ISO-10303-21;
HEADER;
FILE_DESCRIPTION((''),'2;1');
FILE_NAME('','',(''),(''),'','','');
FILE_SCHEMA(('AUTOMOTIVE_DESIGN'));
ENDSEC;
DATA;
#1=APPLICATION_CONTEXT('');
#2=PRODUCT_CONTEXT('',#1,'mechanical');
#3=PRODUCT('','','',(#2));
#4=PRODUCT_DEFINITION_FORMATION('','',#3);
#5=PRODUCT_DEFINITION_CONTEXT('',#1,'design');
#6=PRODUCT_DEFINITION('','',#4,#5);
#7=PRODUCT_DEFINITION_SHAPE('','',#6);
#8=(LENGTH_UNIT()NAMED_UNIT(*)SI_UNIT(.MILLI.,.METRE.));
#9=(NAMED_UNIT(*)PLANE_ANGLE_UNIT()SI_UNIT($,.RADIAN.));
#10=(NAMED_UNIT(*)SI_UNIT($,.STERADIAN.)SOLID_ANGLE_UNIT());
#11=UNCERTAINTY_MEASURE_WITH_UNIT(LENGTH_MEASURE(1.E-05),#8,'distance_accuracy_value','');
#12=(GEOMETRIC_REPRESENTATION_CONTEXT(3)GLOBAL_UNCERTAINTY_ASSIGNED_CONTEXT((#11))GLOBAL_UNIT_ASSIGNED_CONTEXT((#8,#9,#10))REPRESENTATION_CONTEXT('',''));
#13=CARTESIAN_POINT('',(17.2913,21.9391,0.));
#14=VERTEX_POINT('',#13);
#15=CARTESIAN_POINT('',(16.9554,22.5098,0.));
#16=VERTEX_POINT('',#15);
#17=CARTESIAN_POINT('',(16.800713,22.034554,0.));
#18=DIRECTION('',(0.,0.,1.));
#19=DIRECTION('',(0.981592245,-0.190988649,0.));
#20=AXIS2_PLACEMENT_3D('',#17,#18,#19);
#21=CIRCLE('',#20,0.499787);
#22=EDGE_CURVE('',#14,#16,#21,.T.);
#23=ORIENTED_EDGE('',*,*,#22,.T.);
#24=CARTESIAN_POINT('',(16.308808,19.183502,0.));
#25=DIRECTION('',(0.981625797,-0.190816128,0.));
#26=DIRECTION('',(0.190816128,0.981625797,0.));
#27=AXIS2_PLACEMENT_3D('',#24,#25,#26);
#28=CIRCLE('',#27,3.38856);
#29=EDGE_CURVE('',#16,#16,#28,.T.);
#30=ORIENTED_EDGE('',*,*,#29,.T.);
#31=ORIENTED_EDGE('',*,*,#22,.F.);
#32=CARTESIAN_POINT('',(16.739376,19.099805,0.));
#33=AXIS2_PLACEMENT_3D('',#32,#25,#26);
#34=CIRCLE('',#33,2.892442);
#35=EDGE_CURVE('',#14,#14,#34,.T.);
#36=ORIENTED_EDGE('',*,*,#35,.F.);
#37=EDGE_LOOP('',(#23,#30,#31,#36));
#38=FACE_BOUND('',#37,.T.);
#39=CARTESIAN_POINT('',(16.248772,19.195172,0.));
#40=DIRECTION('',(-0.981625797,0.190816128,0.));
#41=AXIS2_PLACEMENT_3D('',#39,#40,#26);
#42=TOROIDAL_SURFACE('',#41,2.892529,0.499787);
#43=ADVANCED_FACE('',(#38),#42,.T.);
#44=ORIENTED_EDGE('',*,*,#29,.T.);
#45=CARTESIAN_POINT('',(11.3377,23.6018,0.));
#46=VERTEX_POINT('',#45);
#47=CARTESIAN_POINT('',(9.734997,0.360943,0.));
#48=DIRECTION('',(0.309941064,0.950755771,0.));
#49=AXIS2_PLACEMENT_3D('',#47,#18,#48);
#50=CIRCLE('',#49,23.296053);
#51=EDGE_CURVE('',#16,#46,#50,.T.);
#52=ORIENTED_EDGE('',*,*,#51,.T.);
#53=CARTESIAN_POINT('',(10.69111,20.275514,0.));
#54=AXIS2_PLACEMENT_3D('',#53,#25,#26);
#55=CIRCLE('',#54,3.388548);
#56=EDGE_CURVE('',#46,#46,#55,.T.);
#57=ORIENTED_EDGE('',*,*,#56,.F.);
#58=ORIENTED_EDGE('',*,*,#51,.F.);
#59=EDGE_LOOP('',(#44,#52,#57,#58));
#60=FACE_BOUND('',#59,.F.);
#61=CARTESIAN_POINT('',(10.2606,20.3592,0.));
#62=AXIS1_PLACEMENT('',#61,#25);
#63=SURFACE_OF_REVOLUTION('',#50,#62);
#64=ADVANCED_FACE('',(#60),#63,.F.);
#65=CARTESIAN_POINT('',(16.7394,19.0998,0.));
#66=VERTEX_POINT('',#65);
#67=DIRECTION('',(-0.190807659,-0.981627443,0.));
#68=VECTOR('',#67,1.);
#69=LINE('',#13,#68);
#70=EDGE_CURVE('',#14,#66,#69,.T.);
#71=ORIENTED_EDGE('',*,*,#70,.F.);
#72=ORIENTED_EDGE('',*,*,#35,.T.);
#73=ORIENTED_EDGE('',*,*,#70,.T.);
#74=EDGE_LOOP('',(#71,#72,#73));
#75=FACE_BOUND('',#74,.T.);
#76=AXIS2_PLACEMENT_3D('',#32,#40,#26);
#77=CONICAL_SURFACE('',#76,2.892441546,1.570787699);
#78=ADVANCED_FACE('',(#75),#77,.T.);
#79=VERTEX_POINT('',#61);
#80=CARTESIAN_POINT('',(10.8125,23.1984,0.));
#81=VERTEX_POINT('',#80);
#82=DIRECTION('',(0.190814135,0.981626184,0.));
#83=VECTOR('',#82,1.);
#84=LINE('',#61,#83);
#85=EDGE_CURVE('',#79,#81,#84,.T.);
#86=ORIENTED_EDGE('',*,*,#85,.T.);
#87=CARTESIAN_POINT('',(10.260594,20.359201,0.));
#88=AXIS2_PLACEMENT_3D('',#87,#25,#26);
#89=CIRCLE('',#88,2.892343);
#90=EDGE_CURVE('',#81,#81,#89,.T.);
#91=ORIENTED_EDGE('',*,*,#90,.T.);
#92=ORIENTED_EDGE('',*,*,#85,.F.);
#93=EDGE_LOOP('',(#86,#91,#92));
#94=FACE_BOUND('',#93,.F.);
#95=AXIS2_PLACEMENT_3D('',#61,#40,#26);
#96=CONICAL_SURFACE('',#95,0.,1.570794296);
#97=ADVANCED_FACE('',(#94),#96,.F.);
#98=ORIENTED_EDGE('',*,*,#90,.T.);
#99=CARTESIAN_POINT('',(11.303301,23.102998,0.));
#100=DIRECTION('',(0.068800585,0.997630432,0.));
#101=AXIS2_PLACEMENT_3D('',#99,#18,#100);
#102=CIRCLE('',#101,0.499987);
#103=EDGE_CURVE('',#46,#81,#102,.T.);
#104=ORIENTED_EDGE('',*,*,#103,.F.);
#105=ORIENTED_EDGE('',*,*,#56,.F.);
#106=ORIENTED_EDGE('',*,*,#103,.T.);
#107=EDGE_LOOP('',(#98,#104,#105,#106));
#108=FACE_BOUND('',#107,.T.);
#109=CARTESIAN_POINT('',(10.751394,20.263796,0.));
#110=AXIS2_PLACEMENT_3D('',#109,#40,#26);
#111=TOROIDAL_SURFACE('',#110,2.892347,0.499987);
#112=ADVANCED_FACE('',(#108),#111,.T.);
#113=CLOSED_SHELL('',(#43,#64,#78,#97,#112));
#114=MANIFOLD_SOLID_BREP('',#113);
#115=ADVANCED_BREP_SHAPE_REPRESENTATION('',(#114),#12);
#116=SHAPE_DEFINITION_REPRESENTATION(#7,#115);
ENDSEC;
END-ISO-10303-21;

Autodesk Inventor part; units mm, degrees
sketch "Sketch_1" plane through (0, 0, 0) normal (0, 0, 1) x (1, 0, 0)
  line L0 (16.7394, 19.0998) -> (10.2606, 20.3592)
  line L1 (10.2606, 20.3592) -> (10.8125, 23.1984)
  arc A0 (11.3377, 23.6018) -> (10.8125, 23.1984) centre (11.3033, 23.103) ccw
  arc A1 (16.9554, 22.5098) -> (11.3377, 23.6018) centre (9.7354, 0.3625) ccw
  arc A2 (17.2913, 21.9391) -> (16.9554, 22.5098) centre (16.8004, 22.0345) ccw
  line L2 (17.2913, 21.9391) -> (16.7394, 19.0998)
  line L3 (16.7394, 19.0998) -> (10.2606, 20.3592)
revolve "Revolution1" add sketch "Sketch_1" angle 360 about axis through (16.7394, 19.0998, 0) along (0.9816272, -0.190809, 0)
ref_plane "NO_GEO_XY" through (0, 0, 0) normal (1, 0, 0) x (0, 0, -1)
ref_plane "NO_GEO_YZ" through (0, 0, 0) normal (0, 0, -1) x (0, 1, 0)
ref_plane "NO_GEO_ZX" through (0, 0, 0) normal (0, 1, 0) x (1, 0, 0)
ref_plane "roller2_XY" through (0, 19.7295, 0) normal (1, 0, 0) x (0, 0, -1)
ref_plane "roller2_YZ" through (0, 19.7295, 0) normal (0, 0, -1) x (0, 1, 0)
ref_plane "roller2_ZX" through (0, 19.7295, 0) normal (0, 1, 0) x (1, 0, 0)
properties part number "22205/20 E_r2"
